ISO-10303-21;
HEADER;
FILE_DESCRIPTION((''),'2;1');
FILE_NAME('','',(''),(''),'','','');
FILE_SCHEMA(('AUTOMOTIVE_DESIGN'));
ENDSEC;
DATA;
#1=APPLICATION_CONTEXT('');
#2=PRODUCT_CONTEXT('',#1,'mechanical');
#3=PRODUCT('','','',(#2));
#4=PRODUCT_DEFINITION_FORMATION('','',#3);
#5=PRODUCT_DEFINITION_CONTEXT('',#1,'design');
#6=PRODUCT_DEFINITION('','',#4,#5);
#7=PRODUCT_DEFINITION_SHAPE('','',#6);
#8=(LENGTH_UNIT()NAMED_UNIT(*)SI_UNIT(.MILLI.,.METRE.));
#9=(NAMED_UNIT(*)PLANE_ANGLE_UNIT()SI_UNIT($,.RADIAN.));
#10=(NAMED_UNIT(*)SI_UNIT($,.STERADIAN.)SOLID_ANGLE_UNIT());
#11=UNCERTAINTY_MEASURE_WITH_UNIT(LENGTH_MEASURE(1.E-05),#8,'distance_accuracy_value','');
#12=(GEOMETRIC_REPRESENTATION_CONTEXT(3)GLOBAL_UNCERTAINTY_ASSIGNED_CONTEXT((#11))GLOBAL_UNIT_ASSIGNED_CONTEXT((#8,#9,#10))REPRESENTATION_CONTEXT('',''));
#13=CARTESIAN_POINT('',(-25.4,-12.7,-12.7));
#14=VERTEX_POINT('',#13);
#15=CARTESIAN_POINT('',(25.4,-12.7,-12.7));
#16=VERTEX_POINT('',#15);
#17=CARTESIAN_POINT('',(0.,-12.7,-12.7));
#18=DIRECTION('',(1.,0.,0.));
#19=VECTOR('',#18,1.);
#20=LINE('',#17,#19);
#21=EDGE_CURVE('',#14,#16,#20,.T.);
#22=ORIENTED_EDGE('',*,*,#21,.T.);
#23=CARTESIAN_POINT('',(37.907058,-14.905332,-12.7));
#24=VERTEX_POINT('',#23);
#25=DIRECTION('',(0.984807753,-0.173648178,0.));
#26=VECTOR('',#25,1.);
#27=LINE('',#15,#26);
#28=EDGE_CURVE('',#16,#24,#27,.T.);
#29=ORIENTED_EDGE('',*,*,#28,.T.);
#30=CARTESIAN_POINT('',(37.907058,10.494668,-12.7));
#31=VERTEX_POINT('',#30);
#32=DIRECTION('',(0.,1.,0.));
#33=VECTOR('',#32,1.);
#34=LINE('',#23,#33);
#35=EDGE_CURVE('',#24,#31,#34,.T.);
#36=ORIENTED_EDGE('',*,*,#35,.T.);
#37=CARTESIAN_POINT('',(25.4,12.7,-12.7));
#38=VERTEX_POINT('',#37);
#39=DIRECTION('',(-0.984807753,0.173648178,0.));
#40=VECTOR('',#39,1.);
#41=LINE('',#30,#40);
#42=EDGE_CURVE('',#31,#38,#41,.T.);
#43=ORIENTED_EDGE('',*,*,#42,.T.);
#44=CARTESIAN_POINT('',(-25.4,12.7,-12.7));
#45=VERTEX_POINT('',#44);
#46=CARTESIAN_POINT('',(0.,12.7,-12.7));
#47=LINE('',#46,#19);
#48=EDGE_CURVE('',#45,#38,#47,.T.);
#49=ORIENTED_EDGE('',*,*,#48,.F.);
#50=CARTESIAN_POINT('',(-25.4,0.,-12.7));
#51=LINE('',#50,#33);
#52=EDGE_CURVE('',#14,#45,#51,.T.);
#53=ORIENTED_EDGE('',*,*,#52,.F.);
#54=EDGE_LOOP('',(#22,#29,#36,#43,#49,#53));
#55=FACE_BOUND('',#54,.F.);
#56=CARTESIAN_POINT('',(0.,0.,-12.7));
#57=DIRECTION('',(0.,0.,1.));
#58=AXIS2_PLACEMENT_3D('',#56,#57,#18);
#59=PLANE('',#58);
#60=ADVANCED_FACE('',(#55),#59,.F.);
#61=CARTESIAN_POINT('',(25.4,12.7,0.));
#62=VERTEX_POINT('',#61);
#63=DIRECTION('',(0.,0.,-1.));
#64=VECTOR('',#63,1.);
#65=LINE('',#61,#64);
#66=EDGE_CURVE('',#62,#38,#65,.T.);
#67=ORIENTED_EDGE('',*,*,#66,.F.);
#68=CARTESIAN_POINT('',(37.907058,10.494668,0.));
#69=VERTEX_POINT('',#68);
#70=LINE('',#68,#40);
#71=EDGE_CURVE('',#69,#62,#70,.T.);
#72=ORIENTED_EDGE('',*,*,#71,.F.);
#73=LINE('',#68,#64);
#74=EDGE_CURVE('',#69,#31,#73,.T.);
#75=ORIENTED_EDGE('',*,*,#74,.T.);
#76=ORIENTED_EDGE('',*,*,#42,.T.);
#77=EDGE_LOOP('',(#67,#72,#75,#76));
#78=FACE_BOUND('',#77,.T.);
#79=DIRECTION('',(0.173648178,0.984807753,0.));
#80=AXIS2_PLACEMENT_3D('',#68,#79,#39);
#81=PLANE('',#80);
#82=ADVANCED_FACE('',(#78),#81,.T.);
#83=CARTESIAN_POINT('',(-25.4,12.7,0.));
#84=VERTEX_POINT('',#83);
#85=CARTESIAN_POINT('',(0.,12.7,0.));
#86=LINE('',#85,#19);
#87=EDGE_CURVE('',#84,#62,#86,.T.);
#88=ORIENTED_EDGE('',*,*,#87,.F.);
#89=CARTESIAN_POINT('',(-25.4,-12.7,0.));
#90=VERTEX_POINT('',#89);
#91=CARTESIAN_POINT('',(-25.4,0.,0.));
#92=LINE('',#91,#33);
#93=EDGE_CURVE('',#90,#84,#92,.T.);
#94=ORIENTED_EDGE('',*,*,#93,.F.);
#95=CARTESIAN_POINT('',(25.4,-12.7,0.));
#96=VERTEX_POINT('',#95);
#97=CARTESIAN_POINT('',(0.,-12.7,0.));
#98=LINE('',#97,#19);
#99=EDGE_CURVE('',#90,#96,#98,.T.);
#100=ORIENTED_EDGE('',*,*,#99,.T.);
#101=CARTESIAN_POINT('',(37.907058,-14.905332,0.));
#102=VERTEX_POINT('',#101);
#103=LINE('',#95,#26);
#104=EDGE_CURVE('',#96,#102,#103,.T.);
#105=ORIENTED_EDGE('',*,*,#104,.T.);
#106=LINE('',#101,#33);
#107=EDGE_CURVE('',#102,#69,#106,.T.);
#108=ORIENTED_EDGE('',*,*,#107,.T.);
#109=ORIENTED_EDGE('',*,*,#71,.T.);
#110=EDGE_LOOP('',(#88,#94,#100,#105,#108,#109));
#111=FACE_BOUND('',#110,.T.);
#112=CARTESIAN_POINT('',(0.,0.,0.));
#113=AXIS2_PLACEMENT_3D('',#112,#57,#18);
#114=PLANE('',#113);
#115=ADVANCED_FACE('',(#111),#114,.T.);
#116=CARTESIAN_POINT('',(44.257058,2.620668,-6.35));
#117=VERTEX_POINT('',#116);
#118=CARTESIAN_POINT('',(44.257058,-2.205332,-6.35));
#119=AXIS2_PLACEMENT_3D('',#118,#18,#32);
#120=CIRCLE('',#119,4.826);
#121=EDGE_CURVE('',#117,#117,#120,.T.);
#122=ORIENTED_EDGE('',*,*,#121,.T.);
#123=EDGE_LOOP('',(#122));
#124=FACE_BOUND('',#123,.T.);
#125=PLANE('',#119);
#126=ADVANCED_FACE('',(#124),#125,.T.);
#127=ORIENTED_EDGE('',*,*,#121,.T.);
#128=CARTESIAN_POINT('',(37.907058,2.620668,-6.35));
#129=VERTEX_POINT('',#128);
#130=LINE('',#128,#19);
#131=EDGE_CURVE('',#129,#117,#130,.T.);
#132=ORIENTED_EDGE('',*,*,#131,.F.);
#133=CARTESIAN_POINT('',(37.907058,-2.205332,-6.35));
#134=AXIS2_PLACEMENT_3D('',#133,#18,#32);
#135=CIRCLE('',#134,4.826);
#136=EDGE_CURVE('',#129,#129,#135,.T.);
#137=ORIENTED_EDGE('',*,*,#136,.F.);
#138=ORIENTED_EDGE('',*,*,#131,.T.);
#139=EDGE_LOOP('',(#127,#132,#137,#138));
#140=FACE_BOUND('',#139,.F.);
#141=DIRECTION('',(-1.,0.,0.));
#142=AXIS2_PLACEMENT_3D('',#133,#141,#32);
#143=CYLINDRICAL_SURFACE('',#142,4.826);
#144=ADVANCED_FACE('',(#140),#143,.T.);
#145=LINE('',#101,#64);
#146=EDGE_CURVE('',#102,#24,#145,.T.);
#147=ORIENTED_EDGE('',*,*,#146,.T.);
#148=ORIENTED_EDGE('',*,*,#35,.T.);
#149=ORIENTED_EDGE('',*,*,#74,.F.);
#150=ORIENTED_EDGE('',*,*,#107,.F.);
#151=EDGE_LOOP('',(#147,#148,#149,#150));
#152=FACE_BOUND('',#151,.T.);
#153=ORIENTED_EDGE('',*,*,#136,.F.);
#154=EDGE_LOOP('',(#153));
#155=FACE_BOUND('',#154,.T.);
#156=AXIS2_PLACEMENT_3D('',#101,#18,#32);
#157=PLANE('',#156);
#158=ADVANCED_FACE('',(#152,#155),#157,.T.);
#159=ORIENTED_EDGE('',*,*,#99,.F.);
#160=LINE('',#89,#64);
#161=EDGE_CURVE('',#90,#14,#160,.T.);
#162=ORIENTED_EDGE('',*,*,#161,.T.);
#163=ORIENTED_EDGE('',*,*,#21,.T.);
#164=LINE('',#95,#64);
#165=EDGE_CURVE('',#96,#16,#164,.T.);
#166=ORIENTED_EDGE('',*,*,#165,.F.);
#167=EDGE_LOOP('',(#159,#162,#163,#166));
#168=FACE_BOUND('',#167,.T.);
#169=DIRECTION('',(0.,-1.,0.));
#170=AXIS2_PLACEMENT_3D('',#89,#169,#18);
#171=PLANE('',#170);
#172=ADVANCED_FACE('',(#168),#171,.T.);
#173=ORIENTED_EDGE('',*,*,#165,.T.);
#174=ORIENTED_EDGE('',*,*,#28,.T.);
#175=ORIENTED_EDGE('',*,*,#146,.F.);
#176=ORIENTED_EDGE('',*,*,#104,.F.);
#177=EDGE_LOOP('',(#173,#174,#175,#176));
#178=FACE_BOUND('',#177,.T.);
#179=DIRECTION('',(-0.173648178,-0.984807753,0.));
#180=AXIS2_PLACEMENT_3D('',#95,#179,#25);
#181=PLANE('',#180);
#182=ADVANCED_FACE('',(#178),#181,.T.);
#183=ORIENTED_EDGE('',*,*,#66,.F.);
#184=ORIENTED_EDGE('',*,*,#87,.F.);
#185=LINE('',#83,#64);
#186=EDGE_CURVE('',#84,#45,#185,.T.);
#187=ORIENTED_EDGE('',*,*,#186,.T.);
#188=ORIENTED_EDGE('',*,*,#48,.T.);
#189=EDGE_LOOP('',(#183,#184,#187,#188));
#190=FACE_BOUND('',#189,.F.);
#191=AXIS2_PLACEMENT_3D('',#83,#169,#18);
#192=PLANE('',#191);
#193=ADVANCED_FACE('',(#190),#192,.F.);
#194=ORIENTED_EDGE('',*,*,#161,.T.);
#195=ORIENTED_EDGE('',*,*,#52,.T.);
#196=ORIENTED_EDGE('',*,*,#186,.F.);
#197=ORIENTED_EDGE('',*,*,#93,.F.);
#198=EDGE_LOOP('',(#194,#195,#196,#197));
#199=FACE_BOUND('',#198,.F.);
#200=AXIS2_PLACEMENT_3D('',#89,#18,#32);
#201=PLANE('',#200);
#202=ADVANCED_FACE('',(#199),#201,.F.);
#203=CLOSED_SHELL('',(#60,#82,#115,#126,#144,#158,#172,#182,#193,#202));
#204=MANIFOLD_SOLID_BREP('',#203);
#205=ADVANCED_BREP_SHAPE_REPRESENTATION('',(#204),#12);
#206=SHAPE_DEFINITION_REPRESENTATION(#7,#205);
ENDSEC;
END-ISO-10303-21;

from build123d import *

# Parameters (mm, degrees)
F0_W     = 50.8
F0_H     = 25.4
F1_DEPTH = 12.7
F2_R     = 4.826
F3_DEPTH = 6.35


# Not quite as in the source:
# - a feature names something its author has since deleted; it is built from what else it names


with BuildPart() as f1:
    # F0 (on Top) → F1 (new body)
    with BuildSketch(Plane.XY):
        Rectangle(F0_W, F0_H)
        Polygon((37.9070584633, 10.4946681436), (25.4, 12.7), (25.4, -12.7), (37.9070584633, -14.9053318564), (37.9070584633, -2.2053318564), align=None)
    extrude(amount=-F1_DEPTH)

    # F2 (on face) → F3 (join)
    with BuildSketch(Plane.YZ.offset(37.9070584633)):
        with Locations((-2.2053318564, -6.35)):
            Circle(F2_R)
    extrude(amount=F3_DEPTH)


solid = f1.part
